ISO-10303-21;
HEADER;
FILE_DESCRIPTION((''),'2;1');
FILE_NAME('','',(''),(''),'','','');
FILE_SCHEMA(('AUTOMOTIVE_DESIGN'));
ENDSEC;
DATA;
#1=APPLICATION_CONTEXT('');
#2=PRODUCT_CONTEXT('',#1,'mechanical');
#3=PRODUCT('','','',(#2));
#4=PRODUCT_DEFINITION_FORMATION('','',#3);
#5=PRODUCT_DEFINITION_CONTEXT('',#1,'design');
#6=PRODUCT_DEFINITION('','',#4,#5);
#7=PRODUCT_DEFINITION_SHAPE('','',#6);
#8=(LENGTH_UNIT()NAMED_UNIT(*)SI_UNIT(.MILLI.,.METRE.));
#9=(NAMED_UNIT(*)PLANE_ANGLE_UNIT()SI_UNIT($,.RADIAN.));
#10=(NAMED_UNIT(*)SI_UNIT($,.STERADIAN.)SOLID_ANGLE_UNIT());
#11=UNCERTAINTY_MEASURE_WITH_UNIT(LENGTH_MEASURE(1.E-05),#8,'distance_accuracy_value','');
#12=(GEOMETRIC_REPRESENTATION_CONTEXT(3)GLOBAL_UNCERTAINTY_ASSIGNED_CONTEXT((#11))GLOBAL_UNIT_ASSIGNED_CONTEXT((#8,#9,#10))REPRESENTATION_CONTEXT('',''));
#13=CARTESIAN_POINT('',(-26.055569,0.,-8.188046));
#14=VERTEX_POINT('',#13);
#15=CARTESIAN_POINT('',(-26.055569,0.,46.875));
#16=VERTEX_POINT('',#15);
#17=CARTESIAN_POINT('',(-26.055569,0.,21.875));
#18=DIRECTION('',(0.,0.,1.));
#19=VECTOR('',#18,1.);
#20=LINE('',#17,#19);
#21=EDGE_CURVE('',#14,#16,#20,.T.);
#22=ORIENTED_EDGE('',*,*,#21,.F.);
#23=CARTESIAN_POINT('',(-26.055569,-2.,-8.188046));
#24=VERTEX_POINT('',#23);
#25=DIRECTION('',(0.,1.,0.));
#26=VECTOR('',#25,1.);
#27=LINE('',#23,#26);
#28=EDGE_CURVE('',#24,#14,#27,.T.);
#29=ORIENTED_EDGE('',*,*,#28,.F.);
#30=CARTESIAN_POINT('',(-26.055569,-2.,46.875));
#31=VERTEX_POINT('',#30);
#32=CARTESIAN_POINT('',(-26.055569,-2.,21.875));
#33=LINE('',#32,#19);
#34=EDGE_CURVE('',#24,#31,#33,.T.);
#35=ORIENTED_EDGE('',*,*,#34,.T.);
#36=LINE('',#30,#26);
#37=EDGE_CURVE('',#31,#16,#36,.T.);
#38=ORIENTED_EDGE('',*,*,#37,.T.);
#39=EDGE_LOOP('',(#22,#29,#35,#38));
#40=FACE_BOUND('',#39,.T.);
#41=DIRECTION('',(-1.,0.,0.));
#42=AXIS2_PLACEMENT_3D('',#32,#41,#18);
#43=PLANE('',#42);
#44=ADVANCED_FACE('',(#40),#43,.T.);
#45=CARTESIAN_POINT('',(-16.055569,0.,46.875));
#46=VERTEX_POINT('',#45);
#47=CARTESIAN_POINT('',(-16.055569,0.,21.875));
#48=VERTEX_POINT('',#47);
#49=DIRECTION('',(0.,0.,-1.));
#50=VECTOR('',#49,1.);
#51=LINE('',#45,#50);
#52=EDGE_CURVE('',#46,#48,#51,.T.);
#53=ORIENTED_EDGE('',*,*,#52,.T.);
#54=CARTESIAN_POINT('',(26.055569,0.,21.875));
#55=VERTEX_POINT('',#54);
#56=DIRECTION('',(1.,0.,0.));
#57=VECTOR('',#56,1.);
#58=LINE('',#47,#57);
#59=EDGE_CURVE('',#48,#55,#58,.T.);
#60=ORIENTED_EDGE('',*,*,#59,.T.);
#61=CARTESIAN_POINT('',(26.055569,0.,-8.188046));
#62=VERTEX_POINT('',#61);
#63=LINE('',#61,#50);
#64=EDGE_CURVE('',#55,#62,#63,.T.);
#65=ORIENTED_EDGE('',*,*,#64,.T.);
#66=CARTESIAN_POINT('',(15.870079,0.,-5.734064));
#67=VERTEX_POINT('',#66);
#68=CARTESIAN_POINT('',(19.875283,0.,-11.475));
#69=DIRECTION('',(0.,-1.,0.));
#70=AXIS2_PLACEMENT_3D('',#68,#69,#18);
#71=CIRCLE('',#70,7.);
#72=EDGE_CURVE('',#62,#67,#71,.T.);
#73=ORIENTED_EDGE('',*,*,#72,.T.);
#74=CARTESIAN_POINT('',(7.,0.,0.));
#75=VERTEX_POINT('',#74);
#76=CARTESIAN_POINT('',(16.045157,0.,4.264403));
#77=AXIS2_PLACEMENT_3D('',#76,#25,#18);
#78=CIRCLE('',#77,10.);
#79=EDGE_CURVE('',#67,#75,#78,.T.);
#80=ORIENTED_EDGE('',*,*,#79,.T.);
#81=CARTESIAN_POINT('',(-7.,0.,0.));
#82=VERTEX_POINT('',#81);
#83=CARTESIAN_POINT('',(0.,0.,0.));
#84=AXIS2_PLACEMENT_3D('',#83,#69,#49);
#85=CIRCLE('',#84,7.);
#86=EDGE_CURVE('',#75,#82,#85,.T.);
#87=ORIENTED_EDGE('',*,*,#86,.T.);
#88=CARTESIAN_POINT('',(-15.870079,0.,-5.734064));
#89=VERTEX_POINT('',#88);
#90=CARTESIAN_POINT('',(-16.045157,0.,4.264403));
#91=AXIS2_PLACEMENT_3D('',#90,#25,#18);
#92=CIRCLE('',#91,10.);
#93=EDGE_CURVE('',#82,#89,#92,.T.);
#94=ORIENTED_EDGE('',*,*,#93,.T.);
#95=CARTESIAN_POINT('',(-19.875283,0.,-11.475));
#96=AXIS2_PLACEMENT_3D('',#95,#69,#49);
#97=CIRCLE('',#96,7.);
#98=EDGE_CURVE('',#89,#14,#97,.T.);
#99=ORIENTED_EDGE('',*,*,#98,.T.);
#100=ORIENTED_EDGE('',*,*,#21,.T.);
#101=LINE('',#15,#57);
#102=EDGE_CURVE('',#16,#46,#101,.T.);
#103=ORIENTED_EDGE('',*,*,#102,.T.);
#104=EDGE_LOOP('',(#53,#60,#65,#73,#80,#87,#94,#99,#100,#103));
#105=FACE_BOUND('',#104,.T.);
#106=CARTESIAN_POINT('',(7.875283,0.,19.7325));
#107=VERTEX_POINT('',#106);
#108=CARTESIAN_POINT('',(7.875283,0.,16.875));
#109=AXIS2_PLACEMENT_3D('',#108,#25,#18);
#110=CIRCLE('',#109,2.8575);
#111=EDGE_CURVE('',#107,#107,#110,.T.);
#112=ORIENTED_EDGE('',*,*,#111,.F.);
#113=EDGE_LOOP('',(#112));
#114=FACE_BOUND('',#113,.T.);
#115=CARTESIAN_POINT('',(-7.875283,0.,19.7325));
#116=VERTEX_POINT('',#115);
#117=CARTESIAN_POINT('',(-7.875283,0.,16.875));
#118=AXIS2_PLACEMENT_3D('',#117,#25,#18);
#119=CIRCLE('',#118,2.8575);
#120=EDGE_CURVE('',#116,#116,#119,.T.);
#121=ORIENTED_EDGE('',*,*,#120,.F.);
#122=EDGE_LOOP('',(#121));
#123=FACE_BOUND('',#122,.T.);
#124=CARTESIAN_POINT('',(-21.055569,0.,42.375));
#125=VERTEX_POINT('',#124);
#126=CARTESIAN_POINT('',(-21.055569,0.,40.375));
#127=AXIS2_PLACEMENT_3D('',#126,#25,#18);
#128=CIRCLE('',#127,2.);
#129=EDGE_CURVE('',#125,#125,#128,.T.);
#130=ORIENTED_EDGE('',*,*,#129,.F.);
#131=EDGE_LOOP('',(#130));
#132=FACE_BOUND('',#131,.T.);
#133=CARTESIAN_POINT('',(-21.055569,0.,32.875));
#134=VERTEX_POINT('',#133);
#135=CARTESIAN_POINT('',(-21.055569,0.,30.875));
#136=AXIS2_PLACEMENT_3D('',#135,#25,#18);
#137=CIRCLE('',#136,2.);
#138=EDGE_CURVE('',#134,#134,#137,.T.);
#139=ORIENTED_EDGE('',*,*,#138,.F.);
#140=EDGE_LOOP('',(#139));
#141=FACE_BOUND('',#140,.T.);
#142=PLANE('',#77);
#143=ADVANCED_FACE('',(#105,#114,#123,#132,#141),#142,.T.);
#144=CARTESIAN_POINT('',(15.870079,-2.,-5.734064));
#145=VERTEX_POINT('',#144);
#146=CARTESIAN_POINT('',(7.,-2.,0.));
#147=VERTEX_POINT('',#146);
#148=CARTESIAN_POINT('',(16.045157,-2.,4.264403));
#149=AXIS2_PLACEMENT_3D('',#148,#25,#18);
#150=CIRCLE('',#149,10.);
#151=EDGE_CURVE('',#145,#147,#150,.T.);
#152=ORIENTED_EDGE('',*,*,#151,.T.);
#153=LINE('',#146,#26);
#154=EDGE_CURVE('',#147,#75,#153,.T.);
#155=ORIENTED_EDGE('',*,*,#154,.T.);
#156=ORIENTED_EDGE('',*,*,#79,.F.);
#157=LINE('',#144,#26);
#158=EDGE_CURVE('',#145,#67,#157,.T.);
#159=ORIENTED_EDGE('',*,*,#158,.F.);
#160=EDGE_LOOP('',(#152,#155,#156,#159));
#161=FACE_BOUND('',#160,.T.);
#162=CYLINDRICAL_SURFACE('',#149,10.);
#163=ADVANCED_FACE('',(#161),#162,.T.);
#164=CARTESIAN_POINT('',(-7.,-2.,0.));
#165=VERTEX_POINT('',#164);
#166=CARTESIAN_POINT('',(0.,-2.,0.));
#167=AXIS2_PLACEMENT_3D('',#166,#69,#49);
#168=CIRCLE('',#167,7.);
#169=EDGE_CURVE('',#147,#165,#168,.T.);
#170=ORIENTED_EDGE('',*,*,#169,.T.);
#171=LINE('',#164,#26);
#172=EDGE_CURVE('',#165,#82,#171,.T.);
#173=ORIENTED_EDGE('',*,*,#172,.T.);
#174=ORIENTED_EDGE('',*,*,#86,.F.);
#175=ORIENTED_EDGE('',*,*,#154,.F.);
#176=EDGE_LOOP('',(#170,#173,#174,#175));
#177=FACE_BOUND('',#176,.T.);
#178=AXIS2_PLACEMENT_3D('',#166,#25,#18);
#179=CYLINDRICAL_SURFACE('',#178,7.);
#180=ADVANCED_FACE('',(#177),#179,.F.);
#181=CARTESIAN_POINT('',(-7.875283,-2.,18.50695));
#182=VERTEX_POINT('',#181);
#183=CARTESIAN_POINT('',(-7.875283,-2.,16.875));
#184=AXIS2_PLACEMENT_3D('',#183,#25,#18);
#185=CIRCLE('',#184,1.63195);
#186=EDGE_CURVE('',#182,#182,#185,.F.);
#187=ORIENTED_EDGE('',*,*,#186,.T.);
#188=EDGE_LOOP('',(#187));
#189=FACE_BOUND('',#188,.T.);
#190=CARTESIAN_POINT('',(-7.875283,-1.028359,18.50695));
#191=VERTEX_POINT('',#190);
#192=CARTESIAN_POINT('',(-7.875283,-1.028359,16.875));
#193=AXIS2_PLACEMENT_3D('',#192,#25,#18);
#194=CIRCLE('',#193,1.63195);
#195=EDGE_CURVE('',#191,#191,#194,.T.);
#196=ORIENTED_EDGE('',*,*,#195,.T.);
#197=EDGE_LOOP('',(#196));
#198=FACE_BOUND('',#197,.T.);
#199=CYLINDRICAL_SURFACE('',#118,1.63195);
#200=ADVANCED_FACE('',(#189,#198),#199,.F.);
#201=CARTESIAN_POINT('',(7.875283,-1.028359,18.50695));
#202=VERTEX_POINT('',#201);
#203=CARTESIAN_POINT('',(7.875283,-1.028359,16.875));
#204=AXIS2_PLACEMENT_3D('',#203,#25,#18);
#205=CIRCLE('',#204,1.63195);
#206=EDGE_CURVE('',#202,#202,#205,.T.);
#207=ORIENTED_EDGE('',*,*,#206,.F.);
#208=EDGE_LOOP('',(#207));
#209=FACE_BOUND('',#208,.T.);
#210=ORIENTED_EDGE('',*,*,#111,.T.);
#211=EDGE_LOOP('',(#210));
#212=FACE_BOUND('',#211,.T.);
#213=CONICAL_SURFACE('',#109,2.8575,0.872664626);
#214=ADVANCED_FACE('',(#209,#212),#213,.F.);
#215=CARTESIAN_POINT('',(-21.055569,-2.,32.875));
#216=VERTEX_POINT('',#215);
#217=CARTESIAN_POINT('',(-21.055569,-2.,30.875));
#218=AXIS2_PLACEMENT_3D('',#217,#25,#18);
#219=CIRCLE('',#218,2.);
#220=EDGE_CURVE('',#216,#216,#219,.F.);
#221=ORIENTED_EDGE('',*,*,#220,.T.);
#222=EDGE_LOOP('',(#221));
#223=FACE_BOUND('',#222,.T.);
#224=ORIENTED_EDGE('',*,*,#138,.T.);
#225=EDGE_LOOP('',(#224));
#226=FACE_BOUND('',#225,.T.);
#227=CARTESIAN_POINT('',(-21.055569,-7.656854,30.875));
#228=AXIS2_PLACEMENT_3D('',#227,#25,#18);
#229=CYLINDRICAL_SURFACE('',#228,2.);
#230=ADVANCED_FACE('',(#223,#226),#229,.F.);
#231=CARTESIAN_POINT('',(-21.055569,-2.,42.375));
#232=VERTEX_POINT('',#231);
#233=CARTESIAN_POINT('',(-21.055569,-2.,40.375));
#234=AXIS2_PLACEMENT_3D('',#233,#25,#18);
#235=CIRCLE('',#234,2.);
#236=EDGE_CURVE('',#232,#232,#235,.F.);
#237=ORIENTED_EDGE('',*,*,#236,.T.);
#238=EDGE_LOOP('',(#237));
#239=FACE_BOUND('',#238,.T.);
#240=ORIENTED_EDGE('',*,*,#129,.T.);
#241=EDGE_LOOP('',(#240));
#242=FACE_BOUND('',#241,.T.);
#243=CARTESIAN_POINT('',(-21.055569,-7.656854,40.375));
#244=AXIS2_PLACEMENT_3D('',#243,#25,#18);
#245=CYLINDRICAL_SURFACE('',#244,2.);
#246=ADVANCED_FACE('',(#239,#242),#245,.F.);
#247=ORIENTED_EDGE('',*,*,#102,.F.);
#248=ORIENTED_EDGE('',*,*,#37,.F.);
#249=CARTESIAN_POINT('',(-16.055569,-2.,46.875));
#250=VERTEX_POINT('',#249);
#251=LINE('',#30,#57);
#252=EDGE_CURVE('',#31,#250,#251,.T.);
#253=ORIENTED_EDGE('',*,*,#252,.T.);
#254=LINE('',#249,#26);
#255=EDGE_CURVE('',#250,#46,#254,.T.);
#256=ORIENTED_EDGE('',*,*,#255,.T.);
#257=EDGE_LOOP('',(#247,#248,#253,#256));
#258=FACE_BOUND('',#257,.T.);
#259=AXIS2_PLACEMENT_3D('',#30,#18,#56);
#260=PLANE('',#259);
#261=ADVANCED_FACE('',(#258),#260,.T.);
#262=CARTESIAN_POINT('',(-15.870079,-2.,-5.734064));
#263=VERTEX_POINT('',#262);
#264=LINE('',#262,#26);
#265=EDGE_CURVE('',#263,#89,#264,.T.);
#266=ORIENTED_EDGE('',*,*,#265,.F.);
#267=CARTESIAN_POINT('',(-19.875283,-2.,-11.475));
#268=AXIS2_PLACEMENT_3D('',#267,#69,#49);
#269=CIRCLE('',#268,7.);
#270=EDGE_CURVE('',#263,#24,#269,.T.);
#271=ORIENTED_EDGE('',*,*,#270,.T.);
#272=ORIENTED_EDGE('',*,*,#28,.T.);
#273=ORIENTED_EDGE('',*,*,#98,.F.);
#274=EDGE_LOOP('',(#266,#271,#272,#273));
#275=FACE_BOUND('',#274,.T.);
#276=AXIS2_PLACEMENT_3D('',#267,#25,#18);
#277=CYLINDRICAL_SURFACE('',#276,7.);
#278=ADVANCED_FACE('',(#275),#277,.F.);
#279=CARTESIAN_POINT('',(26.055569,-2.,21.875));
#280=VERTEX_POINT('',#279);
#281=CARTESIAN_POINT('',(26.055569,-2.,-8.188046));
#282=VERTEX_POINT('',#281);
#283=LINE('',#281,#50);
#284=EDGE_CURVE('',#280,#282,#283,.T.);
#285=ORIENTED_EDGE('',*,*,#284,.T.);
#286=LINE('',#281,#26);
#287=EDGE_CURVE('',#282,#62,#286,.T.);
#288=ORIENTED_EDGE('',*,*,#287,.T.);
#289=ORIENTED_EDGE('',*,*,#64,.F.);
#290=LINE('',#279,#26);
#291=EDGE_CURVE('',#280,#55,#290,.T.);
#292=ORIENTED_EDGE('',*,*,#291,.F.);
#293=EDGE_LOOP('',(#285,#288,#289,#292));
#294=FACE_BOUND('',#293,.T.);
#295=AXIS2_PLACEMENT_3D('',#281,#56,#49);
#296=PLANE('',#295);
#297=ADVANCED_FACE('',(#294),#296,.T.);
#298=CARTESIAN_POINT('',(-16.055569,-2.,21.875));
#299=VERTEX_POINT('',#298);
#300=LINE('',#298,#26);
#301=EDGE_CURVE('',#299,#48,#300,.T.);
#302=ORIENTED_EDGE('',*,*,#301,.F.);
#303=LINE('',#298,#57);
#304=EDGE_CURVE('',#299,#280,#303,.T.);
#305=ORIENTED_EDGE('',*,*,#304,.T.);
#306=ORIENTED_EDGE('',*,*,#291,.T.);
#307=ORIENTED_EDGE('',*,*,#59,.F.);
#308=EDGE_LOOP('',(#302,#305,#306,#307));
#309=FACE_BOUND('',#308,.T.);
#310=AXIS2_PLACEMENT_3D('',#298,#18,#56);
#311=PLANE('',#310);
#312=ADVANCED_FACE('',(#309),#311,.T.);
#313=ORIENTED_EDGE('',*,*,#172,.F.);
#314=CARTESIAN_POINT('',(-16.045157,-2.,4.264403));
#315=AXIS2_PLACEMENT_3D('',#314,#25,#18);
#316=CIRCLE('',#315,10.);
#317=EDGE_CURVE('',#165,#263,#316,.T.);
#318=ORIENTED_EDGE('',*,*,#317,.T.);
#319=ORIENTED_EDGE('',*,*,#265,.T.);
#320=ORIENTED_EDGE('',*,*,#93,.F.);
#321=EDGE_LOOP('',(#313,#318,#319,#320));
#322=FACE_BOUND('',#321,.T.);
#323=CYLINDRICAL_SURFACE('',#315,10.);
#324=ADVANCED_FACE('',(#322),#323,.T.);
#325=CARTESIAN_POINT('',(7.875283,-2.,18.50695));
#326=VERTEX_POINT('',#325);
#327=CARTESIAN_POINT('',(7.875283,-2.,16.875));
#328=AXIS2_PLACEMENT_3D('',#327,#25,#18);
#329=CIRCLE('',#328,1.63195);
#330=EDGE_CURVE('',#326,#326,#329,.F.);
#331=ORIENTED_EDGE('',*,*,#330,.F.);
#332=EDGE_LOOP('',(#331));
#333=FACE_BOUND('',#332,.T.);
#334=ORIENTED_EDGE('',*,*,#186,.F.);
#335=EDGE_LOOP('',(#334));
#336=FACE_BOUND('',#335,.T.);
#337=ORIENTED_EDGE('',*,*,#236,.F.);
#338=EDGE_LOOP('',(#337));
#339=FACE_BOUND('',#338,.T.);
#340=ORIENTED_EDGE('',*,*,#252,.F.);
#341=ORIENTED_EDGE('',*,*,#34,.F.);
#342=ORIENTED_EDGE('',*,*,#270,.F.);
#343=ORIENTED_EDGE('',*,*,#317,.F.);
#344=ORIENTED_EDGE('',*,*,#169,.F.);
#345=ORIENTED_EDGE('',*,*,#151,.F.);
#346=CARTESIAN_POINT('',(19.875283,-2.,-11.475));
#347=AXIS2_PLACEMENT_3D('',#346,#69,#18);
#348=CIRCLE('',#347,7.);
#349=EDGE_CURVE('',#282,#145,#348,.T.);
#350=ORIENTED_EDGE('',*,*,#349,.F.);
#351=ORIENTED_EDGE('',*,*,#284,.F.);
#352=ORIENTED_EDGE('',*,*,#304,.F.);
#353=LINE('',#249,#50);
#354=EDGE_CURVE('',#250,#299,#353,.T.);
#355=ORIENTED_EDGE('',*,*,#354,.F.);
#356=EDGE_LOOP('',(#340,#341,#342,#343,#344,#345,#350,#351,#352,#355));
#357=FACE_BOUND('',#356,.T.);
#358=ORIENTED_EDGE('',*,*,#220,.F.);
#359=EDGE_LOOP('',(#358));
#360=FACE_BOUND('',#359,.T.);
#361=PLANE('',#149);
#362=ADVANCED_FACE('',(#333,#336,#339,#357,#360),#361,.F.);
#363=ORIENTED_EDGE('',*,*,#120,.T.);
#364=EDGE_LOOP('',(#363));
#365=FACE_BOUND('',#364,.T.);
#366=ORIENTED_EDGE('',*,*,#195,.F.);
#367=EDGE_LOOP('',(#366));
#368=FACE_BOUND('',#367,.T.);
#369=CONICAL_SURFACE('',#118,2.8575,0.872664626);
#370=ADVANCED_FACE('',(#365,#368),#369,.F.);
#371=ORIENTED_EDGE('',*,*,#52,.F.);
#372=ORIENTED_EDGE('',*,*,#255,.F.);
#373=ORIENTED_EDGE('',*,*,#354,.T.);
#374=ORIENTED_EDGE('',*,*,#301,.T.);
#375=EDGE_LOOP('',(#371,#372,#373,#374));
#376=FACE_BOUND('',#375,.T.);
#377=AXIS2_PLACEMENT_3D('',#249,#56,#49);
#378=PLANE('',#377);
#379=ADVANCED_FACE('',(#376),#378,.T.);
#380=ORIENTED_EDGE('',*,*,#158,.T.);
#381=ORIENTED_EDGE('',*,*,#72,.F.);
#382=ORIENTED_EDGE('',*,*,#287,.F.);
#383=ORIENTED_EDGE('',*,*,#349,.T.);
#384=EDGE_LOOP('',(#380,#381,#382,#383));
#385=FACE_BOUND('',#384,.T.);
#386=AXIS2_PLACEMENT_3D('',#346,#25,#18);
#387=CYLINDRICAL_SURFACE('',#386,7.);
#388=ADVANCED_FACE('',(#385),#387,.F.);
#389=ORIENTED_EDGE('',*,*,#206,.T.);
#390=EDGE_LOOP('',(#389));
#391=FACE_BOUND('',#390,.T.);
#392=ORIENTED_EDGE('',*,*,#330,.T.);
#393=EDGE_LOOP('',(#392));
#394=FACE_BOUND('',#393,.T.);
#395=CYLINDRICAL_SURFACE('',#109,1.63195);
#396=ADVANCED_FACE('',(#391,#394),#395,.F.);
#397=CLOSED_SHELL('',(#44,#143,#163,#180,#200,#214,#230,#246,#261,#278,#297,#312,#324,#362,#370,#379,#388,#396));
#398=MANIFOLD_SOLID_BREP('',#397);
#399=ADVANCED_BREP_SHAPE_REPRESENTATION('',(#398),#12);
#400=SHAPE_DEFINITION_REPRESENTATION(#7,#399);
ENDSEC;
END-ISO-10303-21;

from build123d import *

# Parameters (mm, degrees)
BASE_FLANGE1_DEPTH                                = 2
SKETCH7_R                                         = 2
CUT_EXTRUDE1_DEPTH                                = 2
CSK_FOR_4_FLAT_HEAD_MACHINE_SCREW_100_D           = 3.2639
CSK_FOR_4_FLAT_HEAD_MACHINE_SCREW_100_DEPTH       = 2
CSK_FOR_4_FLAT_HEAD_MACHINE_SCREW_100_CSINK_D     = 5.715
CSK_FOR_4_FLAT_HEAD_MACHINE_SCREW_100_CSINK_ANGLE = 100
CSK_FOR_4_FLAT_HEAD_MACHINE_SCREW_100_TIP         = 0.980574487


# Sheet-metal steps are written as plain solids
with BuildPart() as part:
    # Sketch2 → Base-Flange1 (new body)
    with BuildSketch(Plane(origin=(0, 0, 0), x_dir=(1, 0, 0), z_dir=(0, 1, 0))):
        with BuildLine():
            Line((-26.055569119, -21.875), (-26.055569119, -46.875))
            Line((-26.055569119, -46.875), (-16.055569119, -46.875))
            Line((-16.055569119, -46.875), (-16.055569119, -21.875))
            Line((-16.055569119, -21.875), (26.055569119, -21.875))
            Line((26.055569119, -21.875), (26.055569119, 8.188046441))
            ThreePointArc((26.055569119, 8.188046441), (21.514872246, 4.669726518), (15.870079226, 5.73406431))
            ThreePointArc((15.870079226, 5.73406431), (10.616247764, 4.133629141), (7, 0))
            ThreePointArc((7, 0), (0, -7), (-7, 0))
            ThreePointArc((-7, 0), (-10.616247764, 4.133629141), (-15.870079226, 5.73406431))
            ThreePointArc((-15.870079226, 5.73406431), (-21.514872246, 4.669726518), (-26.055569119, 8.188046441))
            Line((-26.055569119, 8.188046441), (-26.055569119, -21.875))
        make_face()
    extrude(amount=-BASE_FLANGE1_DEPTH)

    # Sketch7 → Cut-Extrude1 (cut)
    with BuildSketch(Plane(origin=(0, 0, 0), x_dir=(1, 0, 0), z_dir=(0, 1, 0))):
        with Locations(Location((-21.055569119, -40.375, 0), (0, 0, 270))):
            Circle(SKETCH7_R)
        with Locations(Location((-21.055569119, -30.875, 0), (0, 0, 270))):
            Circle(SKETCH7_R)
    extrude(amount=-CUT_EXTRUDE1_DEPTH, mode=Mode.SUBTRACT)

    # CSK for #4 Flat Head Machine Screw (100)1
    with Locations(Plane(origin=(0, 0, 0), x_dir=(1, 0, 0), z_dir=(0, 1, 0))):
        with Locations((-7.875283017, -16.875), (7.875283017, -16.875)):
            CounterSinkHole(CSK_FOR_4_FLAT_HEAD_MACHINE_SCREW_100_D / 2, CSK_FOR_4_FLAT_HEAD_MACHINE_SCREW_100_CSINK_D / 2, depth=CSK_FOR_4_FLAT_HEAD_MACHINE_SCREW_100_DEPTH, counter_sink_angle=CSK_FOR_4_FLAT_HEAD_MACHINE_SCREW_100_CSINK_ANGLE)
            with Locations((0, 0, -(CSK_FOR_4_FLAT_HEAD_MACHINE_SCREW_100_DEPTH + CSK_FOR_4_FLAT_HEAD_MACHINE_SCREW_100_TIP / 2))):  # 118° drill point
                Cone(0, CSK_FOR_4_FLAT_HEAD_MACHINE_SCREW_100_D / 2, CSK_FOR_4_FLAT_HEAD_MACHINE_SCREW_100_TIP, mode=Mode.SUBTRACT)


solid = part.part
